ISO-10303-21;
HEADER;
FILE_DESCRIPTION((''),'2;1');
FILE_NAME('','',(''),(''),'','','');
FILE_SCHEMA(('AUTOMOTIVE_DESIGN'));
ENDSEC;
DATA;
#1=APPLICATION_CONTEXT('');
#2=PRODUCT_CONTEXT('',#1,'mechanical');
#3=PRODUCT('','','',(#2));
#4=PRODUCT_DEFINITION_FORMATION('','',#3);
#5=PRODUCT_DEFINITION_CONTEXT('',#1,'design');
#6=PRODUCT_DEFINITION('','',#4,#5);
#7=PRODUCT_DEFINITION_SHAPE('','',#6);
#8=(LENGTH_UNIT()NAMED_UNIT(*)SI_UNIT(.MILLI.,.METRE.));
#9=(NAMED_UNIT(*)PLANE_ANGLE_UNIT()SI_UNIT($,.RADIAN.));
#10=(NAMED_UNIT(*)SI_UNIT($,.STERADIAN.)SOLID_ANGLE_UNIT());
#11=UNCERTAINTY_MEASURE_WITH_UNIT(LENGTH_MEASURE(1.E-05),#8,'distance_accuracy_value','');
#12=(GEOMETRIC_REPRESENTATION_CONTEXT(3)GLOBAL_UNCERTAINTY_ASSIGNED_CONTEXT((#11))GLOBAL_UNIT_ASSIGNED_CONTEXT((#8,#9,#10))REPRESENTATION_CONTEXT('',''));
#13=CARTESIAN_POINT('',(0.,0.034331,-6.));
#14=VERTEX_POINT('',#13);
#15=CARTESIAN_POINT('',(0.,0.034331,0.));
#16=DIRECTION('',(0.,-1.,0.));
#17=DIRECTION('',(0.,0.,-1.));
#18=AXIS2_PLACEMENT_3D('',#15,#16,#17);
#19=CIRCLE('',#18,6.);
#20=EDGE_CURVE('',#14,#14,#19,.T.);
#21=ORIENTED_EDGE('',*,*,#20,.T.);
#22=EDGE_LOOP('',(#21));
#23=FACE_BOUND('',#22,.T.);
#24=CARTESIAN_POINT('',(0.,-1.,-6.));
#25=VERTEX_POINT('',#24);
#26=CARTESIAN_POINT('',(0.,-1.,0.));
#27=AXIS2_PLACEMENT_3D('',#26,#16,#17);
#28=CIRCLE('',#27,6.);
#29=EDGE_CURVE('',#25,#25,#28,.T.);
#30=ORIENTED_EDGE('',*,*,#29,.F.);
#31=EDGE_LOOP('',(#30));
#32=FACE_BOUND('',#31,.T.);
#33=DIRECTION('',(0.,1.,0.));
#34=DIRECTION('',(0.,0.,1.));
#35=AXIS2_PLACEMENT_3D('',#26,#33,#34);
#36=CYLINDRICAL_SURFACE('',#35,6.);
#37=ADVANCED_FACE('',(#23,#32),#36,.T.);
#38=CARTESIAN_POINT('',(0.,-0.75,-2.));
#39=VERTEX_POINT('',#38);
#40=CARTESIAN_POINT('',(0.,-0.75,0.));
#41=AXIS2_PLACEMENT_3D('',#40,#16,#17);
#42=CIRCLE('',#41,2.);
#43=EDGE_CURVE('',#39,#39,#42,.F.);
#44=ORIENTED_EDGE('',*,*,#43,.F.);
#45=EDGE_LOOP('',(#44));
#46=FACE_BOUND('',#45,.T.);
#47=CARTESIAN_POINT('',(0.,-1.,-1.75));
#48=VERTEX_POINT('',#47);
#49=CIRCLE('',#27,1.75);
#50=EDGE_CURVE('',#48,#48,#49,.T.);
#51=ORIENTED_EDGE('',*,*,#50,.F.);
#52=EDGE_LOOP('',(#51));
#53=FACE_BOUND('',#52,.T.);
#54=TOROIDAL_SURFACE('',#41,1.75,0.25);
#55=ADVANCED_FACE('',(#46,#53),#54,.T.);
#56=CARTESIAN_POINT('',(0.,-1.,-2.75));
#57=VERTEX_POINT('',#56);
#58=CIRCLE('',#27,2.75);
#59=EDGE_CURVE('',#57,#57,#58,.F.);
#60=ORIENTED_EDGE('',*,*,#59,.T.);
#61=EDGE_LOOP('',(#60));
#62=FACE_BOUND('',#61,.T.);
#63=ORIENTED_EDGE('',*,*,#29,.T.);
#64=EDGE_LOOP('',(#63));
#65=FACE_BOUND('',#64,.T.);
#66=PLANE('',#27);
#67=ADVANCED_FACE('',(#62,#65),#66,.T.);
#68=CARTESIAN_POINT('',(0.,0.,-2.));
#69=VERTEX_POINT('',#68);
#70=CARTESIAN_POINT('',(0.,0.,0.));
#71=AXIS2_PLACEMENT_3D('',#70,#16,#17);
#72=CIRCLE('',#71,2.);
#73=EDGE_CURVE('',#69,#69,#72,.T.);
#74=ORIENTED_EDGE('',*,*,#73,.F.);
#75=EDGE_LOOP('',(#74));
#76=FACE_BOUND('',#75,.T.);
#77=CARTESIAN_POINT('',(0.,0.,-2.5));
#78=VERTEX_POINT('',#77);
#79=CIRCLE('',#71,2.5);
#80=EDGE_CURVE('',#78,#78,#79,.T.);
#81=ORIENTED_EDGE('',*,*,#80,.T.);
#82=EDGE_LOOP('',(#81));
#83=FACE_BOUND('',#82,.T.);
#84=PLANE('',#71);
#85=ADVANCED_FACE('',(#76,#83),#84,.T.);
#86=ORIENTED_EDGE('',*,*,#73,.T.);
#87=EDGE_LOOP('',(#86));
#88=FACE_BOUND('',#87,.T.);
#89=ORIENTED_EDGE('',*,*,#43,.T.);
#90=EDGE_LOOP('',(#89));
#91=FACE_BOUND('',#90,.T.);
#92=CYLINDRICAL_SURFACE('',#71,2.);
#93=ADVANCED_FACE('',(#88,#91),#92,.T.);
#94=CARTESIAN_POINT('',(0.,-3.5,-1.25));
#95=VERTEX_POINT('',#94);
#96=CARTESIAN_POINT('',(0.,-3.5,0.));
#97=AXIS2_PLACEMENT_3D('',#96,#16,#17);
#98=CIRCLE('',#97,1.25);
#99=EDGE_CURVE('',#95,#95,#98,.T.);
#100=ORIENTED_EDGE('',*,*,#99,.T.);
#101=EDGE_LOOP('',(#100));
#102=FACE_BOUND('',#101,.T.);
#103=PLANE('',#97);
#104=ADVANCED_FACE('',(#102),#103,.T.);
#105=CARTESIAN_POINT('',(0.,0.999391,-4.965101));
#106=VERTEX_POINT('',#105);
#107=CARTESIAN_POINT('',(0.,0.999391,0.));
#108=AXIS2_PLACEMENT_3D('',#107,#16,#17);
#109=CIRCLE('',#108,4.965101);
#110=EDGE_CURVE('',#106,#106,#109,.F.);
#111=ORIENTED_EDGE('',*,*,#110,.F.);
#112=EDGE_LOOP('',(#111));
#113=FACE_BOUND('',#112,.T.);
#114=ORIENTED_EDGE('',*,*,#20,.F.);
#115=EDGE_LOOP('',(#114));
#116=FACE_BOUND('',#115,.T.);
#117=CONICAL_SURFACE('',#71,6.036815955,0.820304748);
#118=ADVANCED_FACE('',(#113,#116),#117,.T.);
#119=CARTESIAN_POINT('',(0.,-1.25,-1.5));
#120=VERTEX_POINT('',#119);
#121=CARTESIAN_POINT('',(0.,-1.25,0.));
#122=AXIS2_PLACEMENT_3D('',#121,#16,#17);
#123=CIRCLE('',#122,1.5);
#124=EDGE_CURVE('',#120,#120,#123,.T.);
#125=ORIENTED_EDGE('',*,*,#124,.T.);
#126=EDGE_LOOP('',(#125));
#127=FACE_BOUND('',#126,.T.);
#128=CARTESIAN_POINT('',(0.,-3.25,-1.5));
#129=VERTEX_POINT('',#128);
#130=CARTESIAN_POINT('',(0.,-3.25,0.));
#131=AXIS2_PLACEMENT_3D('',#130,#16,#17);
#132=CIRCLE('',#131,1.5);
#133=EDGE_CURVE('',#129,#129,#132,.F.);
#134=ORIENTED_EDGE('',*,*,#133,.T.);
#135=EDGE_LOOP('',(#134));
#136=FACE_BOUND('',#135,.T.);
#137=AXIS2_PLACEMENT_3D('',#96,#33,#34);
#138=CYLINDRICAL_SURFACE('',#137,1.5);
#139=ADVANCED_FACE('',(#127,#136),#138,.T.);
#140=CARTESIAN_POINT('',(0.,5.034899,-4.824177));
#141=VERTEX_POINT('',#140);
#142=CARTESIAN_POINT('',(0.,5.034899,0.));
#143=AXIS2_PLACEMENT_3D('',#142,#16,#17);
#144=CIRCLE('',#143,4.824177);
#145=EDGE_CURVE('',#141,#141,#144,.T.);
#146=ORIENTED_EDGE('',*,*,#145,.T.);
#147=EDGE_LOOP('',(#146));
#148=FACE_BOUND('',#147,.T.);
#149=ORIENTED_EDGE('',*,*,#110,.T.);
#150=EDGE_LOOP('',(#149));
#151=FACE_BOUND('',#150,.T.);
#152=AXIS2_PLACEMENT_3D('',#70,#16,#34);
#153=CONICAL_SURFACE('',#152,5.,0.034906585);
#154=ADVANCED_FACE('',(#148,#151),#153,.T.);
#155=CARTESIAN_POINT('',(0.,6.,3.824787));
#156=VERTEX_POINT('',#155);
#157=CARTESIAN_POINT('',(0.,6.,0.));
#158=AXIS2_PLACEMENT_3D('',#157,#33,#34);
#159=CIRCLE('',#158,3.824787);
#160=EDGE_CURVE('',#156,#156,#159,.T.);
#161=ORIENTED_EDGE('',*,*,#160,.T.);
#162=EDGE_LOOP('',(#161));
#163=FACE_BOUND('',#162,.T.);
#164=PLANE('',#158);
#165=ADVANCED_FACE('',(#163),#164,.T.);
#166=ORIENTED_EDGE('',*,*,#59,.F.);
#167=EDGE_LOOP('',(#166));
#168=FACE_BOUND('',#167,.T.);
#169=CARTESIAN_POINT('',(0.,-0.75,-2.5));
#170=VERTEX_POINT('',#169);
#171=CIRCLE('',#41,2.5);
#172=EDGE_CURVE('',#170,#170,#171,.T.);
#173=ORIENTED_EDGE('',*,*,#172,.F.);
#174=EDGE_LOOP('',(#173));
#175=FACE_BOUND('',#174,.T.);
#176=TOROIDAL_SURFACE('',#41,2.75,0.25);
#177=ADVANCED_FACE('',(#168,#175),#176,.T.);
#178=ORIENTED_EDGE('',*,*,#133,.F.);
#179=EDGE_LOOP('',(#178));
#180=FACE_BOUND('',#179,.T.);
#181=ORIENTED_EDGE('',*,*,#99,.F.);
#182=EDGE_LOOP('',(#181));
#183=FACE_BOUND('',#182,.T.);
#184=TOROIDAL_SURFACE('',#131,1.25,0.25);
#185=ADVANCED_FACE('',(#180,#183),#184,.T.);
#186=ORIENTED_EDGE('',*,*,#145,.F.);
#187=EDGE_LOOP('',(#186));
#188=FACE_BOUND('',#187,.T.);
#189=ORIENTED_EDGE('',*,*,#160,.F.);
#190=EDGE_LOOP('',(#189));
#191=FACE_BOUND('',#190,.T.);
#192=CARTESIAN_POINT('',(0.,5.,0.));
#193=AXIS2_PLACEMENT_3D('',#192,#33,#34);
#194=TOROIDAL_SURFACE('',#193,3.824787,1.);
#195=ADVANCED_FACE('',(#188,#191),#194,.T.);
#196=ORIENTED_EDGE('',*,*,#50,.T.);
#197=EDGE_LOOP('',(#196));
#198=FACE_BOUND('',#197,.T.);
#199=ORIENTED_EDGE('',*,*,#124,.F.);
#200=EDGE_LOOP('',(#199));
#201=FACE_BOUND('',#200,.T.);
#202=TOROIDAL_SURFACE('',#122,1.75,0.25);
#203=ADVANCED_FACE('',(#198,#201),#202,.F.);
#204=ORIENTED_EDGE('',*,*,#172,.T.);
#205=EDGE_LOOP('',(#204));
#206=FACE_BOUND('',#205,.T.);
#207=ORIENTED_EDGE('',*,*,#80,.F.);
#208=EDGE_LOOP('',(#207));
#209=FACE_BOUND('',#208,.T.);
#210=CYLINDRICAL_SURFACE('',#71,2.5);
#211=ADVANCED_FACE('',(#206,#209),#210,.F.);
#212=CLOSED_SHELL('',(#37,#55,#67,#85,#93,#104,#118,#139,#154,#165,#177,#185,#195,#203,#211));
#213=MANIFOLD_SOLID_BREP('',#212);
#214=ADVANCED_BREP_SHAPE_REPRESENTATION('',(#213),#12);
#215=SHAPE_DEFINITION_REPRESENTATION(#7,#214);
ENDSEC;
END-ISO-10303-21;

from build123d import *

# Parameters (mm, degrees)
SKETCH2_R               = 6
BOSS_EXTRUDE2_DEPTH     = 1
FILLET1_R               = 1
SKETCH3_R               = 2.5
SKETCH3_R_2             = 2
CUT_EXTRUDE1_DEPTH      = 1
BOSS_EXTRUDE3_START     = -3.5
BOSS_EXTRUDE3_OUTLINE_R = 1.5
BOSS_EXTRUDE3_DEPTH     = 2.5
FILLET2_R               = 0.25
FILLET3_R               = 0.25
CHAMFER1_SIZE           = 1.036815955
CHAMFER1_SIZE_2         = 1


# Read off the part's stored shape, not the designer's step: Boss-Extrude1, Boss-Extrude3
# Some blends are built 0.0001 mm under size
with BuildPart() as part:
    # Boss-Extrude1 outline → Boss-Extrude1 (revolve)
    with BuildSketch(Plane.XY):
        Polygon((5, 0), (4.790475383, 6), (0, 6), (0, 0), align=None)
    revolve(axis=Axis((0, 0, 0), (0, 1, 0)))

    # Sketch2 (on Top Plane) → Boss-Extrude2 (add)
    with BuildSketch(Plane(origin=(0, 0, 0), x_dir=(1, 0, 0), z_dir=(0, 1, 0))):
        with Locations(Location((0, 0, 0), (0, 0, 90))):
            Circle(SKETCH2_R)
    extrude(amount=-BOSS_EXTRUDE2_DEPTH)

    # Fillet1
    fillet1_edges = [part.edges().sort_by_distance(p)[0] for p in [
        (-4.790475383, 6, 0),
    ]]
    fillet(fillet1_edges, radius=FILLET1_R)

    # Sketch3 (on Top Plane) → Cut-Extrude1 (cut)
    with BuildSketch(Plane(origin=(0, 0, 0), x_dir=(1, 0, 0), z_dir=(0, 1, 0))):
        with Locations(Location((0, 0, 0), (0, 0, 90))):
            Circle(SKETCH3_R)
        with Locations(Location((0, 0, 0), (0, 0, 90))):
            Circle(SKETCH3_R_2, mode=Mode.SUBTRACT)
    extrude(amount=-CUT_EXTRUDE1_DEPTH, mode=Mode.SUBTRACT)

    # Boss-Extrude3 outline → Boss-Extrude3 (add)
    with BuildSketch(Plane(origin=(0, 0, 0), x_dir=(1, 0, 0), z_dir=(0, 1, 0)).offset(BOSS_EXTRUDE3_START)):
        Circle(BOSS_EXTRUDE3_OUTLINE_R)
    extrude(amount=BOSS_EXTRUDE3_DEPTH)

    # Fillet2
    fillet2_edges = [part.edges().sort_by_distance(p)[0] for p in [
        (0, -1, 2.5),
        (0, -1, 2),
        (-1.5, -1, 0),
    ]]
    fillet(fillet2_edges, radius=FILLET2_R - 0.0001)  # a hair under: the kernel refuses the full size

    # Fillet3
    fillet3_edges = [part.edges().sort_by_distance(p)[0] for p in [
        (-1.5, -3.5, 0),
    ]]
    fillet(fillet3_edges, radius=FILLET3_R)

    # Chamfer1
    # the kernel refuses this chamfer: 1.036815955, 1 mm, written as the material it adds along each edge
    with BuildSketch(Plane(origin=(0, 0, 0), x_dir=(1, 0, 0), z_dir=(0, 0, 1))) as chamfer1_piece_1_section:
        Polygon((5 + CHAMFER1_SIZE, 0), (5 - CHAMFER1_SIZE_2 * 0.0348994967107, CHAMFER1_SIZE_2 * 0.999390827019), (5, 0), align=None)
    chamfer1_piece_1 = revolve(axis=Axis((0, 0, 0), (0, 1, 0)), mode=Mode.PRIVATE)
    chamfer1_piece_1 = chamfer1_piece_1 & Plane(origin=(0, 0.511488324, 0), x_dir=(0, 0, -1), z_dir=(0, 1, 0)) * Cylinder(6, 25, mode=Mode.PRIVATE)
    add(chamfer1_piece_1)


solid = part.part
